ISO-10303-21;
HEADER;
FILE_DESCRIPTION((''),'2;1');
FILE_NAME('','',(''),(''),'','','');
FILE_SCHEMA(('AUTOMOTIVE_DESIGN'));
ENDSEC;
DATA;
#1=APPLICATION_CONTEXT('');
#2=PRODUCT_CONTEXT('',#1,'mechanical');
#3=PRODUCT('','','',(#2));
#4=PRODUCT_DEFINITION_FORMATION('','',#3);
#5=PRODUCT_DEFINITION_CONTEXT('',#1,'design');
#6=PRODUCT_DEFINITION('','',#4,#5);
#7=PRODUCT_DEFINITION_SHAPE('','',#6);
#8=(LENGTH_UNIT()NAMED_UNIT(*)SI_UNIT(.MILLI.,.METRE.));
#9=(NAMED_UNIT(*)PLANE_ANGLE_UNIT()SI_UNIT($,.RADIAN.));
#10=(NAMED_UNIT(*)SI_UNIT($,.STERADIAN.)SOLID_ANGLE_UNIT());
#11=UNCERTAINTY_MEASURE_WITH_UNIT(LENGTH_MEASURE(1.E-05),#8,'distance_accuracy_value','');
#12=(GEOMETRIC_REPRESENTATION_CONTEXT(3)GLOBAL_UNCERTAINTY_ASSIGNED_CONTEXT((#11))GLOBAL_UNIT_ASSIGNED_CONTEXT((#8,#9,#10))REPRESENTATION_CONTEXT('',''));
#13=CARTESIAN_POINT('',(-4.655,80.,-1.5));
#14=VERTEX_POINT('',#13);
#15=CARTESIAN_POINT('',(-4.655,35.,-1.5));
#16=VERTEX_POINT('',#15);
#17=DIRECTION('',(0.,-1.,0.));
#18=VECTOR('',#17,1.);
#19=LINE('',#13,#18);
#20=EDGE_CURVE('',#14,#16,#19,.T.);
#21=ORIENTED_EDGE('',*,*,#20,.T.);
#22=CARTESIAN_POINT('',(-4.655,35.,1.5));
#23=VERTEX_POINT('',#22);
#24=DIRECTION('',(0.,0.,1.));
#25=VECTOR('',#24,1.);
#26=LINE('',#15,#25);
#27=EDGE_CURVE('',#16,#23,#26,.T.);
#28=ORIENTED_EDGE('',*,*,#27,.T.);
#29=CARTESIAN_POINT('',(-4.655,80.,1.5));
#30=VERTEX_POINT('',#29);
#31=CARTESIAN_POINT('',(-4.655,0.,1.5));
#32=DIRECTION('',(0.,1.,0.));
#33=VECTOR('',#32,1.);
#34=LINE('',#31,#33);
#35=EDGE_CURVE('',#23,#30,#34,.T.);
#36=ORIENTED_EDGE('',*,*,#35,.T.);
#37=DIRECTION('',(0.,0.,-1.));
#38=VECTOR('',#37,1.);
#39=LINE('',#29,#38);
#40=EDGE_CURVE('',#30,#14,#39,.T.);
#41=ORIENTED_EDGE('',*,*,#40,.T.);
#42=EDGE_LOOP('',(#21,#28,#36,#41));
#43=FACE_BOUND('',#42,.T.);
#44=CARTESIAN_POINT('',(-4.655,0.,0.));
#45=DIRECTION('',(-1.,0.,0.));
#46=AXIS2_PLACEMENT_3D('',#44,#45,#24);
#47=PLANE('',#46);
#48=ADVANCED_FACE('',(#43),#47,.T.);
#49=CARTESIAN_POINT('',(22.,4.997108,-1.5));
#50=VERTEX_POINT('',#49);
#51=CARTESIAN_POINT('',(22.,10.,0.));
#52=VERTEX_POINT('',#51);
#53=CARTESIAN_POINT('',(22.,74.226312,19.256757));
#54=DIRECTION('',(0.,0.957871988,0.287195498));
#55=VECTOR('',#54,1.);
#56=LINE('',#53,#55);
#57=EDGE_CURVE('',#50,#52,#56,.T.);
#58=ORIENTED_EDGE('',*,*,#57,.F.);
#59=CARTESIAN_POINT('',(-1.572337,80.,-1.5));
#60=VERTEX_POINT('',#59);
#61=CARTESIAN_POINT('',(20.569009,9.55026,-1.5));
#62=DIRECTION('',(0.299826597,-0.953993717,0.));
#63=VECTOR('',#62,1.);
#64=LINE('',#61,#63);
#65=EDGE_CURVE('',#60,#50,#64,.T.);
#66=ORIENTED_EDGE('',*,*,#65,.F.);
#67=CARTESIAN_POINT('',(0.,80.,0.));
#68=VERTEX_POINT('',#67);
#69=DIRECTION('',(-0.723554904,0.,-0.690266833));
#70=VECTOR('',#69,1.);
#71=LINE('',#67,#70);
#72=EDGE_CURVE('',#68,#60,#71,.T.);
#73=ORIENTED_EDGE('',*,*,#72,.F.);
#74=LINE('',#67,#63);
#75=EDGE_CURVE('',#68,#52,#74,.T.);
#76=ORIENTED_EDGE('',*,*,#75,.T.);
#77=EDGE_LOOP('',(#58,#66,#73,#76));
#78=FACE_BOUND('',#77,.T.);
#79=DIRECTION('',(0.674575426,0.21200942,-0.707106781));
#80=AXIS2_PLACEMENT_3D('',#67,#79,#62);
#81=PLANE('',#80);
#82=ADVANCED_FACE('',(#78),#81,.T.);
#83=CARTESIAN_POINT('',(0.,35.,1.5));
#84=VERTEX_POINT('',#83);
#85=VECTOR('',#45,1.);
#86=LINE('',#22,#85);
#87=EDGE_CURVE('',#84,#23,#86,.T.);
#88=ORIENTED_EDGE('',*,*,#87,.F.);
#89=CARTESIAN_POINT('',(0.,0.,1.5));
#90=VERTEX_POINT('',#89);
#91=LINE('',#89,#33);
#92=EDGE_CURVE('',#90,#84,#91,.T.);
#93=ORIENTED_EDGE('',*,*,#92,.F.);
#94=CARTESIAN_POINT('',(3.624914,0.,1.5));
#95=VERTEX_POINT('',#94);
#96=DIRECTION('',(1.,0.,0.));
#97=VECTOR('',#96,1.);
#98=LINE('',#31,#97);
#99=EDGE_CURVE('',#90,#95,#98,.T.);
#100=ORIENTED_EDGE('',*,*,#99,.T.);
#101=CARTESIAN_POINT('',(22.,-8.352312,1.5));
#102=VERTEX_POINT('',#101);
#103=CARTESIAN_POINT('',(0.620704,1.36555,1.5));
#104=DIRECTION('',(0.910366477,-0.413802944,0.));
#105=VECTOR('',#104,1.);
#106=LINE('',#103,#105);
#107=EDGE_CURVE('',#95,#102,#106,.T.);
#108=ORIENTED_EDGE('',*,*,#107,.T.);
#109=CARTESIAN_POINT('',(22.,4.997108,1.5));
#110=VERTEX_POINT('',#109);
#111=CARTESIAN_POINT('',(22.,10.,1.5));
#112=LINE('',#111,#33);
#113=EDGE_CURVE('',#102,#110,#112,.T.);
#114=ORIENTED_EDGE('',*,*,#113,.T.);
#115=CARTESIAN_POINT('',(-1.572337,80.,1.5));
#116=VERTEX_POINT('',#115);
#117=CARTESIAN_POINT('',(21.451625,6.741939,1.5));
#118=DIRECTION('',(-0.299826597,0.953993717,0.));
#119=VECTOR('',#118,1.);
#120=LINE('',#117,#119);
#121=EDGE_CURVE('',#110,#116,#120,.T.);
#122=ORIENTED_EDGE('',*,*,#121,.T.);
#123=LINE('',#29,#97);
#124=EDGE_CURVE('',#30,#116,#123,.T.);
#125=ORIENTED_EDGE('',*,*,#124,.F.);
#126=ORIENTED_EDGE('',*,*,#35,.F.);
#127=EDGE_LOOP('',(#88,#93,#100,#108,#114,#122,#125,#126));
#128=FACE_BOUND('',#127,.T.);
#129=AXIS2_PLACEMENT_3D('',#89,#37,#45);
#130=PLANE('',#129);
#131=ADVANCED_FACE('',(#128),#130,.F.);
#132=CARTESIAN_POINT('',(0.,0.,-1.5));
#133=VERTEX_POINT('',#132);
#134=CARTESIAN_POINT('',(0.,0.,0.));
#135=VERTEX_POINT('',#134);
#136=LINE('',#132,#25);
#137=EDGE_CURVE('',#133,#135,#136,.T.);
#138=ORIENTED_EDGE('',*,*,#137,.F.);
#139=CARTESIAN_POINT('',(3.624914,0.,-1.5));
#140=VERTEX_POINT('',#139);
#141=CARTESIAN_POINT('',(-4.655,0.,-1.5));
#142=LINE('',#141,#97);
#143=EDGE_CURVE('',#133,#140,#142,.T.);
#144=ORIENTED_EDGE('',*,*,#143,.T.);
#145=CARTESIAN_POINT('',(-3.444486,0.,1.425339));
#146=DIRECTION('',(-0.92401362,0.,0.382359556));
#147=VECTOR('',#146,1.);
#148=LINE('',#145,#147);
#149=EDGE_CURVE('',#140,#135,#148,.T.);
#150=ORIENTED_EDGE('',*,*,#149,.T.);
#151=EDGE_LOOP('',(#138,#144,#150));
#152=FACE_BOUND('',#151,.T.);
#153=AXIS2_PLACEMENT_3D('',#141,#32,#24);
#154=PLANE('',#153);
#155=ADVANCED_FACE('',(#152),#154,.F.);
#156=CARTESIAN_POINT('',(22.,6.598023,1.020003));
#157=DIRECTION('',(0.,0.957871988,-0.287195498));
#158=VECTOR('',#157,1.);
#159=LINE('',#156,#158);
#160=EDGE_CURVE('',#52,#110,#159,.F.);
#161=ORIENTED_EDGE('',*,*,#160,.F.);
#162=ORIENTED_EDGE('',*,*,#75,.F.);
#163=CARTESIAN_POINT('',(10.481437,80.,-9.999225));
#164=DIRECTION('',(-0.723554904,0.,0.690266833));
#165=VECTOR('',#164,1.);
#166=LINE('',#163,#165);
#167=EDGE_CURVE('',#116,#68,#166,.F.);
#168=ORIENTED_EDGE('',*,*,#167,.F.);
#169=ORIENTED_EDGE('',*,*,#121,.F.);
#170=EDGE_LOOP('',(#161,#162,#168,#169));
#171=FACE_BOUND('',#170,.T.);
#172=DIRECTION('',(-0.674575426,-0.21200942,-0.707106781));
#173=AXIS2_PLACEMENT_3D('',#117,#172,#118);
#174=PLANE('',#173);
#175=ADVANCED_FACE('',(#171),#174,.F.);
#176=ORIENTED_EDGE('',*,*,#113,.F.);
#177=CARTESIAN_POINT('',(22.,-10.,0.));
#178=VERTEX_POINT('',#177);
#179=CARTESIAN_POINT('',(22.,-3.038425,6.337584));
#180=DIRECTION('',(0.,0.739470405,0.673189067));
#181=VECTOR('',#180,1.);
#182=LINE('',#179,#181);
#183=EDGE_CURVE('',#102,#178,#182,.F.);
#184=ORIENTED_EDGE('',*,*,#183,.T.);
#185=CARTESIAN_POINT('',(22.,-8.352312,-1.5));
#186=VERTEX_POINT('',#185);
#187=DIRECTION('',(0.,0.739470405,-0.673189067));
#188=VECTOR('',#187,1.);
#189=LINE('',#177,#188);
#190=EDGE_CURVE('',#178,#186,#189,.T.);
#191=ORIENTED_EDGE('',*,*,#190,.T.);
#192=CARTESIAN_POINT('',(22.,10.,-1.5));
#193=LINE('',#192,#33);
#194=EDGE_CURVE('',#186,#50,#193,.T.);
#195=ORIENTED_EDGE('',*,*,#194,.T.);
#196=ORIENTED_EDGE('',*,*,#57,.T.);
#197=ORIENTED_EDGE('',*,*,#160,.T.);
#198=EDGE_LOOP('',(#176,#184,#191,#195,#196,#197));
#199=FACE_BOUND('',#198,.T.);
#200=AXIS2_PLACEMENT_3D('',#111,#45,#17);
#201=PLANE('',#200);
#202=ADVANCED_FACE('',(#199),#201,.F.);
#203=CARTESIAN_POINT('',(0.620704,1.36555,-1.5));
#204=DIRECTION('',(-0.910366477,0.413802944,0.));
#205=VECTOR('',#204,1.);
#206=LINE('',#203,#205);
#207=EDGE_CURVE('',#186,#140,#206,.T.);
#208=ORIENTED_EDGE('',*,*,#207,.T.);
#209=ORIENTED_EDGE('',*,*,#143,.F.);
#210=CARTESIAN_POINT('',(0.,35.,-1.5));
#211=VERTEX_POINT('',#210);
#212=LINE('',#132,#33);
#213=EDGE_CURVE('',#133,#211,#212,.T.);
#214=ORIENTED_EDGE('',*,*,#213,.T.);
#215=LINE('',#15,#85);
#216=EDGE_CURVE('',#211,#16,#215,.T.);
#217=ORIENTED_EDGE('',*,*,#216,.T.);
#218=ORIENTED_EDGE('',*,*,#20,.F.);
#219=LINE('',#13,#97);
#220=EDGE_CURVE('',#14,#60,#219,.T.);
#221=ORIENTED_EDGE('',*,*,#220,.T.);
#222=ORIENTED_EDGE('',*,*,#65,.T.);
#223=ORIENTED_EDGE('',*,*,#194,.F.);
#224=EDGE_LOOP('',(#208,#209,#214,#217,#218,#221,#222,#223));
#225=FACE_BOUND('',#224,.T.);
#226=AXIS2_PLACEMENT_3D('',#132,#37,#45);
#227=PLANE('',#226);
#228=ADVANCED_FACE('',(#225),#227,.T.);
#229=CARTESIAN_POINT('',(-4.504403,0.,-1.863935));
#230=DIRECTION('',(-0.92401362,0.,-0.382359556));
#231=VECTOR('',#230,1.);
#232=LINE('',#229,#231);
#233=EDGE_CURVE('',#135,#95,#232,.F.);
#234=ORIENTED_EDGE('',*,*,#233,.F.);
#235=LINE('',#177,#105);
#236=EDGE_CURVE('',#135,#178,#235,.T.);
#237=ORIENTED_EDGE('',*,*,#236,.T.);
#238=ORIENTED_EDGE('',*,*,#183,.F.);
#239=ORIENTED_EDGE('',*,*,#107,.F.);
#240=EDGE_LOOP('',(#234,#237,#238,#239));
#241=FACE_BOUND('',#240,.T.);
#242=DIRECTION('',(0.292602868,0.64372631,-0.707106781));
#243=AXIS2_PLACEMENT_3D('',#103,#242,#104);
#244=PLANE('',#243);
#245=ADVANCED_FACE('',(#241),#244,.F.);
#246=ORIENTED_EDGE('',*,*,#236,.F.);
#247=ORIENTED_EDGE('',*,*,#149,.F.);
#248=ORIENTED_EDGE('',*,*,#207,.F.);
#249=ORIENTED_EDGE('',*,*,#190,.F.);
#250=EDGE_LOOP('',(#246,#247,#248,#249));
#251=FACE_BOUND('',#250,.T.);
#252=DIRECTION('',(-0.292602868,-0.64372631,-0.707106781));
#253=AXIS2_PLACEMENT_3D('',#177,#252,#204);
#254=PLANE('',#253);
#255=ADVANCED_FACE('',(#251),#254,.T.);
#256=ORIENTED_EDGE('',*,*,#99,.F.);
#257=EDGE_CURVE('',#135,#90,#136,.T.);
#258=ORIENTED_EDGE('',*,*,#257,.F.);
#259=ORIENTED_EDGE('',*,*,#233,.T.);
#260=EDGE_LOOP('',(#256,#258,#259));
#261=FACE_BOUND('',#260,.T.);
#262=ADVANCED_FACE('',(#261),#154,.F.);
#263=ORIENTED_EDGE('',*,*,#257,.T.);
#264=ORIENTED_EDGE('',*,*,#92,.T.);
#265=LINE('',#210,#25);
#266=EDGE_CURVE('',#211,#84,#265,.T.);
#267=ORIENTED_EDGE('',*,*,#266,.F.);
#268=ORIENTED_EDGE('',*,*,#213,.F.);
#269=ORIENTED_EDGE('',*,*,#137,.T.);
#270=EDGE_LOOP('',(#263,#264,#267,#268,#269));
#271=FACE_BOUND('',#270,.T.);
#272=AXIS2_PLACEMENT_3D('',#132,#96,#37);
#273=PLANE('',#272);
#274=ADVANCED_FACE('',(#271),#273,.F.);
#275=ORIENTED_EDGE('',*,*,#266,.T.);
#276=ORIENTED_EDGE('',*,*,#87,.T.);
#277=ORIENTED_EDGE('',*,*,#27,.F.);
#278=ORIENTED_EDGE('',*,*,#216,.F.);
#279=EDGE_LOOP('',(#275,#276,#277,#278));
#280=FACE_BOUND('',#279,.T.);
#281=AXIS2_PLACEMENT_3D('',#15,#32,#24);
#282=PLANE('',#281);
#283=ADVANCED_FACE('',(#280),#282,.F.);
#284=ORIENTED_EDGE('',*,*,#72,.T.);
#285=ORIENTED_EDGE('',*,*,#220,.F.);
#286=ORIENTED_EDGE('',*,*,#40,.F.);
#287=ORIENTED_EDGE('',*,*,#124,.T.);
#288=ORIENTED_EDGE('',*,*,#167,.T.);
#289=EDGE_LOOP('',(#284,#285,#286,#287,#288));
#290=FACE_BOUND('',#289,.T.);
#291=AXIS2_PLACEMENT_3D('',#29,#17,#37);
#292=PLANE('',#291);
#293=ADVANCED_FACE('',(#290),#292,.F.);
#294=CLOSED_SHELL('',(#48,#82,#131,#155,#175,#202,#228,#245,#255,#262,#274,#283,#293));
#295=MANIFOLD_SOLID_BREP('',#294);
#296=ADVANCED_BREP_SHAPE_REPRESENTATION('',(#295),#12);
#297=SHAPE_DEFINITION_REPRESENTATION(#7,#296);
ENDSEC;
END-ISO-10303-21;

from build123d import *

# Parameters (mm, degrees)
BOSS_EXTRUDE1_DEPTH     = 1.5
SKETCH7_W               = 3
SKETCH7_H               = 80
BOSS_EXTRUDE2_DEPTH     = 4.655
CHAMFER1_SIZE           = 1.5
CUT_EXTRUDE1_DEPTH      = 83.983432081
CUT_EXTRUDE1_DEPTH_BACK = 83.983432081
SKETCH8_W               = 4.655
SKETCH8_H               = 35


with BuildPart() as part:
    # Sketch1 → Boss-Extrude1 (new, symmetric)
    with BuildSketch(Plane.XY):
        Polygon((0, 0), (0, 80), (22, 10), (22, -10), align=None)
    extrude(amount=BOSS_EXTRUDE1_DEPTH, both=True)

    # Sketch7 → Boss-Extrude2 (add)
    with BuildSketch(Plane.ZY):
        with Locations((0, 40)):
            Rectangle(SKETCH7_W, SKETCH7_H)
    extrude(amount=BOSS_EXTRUDE2_DEPTH)

    # Chamfer1
    chamfer1_edges = [part.edges().sort_by_distance(p)[0] for p in [
        (11, -5, 1.5),
        (11, -5, -1.5),
        (11, 45, -1.5),
        (11, 45, 1.5),
    ]]
    chamfer(chamfer1_edges, length=CHAMFER1_SIZE - 0.0001)  # a hair under: the kernel refuses the full size

    # Sketch8 → Cut-Extrude1 (cut, two sides: drawn at the far end of the back side and taken through both)
    with BuildSketch(Plane.XY.offset(-CUT_EXTRUDE1_DEPTH_BACK)):
        with Locations((-2.3275, 17.5)):
            Rectangle(SKETCH8_W, SKETCH8_H)
    extrude(amount=CUT_EXTRUDE1_DEPTH + CUT_EXTRUDE1_DEPTH_BACK, mode=Mode.SUBTRACT)


solid = part.part
